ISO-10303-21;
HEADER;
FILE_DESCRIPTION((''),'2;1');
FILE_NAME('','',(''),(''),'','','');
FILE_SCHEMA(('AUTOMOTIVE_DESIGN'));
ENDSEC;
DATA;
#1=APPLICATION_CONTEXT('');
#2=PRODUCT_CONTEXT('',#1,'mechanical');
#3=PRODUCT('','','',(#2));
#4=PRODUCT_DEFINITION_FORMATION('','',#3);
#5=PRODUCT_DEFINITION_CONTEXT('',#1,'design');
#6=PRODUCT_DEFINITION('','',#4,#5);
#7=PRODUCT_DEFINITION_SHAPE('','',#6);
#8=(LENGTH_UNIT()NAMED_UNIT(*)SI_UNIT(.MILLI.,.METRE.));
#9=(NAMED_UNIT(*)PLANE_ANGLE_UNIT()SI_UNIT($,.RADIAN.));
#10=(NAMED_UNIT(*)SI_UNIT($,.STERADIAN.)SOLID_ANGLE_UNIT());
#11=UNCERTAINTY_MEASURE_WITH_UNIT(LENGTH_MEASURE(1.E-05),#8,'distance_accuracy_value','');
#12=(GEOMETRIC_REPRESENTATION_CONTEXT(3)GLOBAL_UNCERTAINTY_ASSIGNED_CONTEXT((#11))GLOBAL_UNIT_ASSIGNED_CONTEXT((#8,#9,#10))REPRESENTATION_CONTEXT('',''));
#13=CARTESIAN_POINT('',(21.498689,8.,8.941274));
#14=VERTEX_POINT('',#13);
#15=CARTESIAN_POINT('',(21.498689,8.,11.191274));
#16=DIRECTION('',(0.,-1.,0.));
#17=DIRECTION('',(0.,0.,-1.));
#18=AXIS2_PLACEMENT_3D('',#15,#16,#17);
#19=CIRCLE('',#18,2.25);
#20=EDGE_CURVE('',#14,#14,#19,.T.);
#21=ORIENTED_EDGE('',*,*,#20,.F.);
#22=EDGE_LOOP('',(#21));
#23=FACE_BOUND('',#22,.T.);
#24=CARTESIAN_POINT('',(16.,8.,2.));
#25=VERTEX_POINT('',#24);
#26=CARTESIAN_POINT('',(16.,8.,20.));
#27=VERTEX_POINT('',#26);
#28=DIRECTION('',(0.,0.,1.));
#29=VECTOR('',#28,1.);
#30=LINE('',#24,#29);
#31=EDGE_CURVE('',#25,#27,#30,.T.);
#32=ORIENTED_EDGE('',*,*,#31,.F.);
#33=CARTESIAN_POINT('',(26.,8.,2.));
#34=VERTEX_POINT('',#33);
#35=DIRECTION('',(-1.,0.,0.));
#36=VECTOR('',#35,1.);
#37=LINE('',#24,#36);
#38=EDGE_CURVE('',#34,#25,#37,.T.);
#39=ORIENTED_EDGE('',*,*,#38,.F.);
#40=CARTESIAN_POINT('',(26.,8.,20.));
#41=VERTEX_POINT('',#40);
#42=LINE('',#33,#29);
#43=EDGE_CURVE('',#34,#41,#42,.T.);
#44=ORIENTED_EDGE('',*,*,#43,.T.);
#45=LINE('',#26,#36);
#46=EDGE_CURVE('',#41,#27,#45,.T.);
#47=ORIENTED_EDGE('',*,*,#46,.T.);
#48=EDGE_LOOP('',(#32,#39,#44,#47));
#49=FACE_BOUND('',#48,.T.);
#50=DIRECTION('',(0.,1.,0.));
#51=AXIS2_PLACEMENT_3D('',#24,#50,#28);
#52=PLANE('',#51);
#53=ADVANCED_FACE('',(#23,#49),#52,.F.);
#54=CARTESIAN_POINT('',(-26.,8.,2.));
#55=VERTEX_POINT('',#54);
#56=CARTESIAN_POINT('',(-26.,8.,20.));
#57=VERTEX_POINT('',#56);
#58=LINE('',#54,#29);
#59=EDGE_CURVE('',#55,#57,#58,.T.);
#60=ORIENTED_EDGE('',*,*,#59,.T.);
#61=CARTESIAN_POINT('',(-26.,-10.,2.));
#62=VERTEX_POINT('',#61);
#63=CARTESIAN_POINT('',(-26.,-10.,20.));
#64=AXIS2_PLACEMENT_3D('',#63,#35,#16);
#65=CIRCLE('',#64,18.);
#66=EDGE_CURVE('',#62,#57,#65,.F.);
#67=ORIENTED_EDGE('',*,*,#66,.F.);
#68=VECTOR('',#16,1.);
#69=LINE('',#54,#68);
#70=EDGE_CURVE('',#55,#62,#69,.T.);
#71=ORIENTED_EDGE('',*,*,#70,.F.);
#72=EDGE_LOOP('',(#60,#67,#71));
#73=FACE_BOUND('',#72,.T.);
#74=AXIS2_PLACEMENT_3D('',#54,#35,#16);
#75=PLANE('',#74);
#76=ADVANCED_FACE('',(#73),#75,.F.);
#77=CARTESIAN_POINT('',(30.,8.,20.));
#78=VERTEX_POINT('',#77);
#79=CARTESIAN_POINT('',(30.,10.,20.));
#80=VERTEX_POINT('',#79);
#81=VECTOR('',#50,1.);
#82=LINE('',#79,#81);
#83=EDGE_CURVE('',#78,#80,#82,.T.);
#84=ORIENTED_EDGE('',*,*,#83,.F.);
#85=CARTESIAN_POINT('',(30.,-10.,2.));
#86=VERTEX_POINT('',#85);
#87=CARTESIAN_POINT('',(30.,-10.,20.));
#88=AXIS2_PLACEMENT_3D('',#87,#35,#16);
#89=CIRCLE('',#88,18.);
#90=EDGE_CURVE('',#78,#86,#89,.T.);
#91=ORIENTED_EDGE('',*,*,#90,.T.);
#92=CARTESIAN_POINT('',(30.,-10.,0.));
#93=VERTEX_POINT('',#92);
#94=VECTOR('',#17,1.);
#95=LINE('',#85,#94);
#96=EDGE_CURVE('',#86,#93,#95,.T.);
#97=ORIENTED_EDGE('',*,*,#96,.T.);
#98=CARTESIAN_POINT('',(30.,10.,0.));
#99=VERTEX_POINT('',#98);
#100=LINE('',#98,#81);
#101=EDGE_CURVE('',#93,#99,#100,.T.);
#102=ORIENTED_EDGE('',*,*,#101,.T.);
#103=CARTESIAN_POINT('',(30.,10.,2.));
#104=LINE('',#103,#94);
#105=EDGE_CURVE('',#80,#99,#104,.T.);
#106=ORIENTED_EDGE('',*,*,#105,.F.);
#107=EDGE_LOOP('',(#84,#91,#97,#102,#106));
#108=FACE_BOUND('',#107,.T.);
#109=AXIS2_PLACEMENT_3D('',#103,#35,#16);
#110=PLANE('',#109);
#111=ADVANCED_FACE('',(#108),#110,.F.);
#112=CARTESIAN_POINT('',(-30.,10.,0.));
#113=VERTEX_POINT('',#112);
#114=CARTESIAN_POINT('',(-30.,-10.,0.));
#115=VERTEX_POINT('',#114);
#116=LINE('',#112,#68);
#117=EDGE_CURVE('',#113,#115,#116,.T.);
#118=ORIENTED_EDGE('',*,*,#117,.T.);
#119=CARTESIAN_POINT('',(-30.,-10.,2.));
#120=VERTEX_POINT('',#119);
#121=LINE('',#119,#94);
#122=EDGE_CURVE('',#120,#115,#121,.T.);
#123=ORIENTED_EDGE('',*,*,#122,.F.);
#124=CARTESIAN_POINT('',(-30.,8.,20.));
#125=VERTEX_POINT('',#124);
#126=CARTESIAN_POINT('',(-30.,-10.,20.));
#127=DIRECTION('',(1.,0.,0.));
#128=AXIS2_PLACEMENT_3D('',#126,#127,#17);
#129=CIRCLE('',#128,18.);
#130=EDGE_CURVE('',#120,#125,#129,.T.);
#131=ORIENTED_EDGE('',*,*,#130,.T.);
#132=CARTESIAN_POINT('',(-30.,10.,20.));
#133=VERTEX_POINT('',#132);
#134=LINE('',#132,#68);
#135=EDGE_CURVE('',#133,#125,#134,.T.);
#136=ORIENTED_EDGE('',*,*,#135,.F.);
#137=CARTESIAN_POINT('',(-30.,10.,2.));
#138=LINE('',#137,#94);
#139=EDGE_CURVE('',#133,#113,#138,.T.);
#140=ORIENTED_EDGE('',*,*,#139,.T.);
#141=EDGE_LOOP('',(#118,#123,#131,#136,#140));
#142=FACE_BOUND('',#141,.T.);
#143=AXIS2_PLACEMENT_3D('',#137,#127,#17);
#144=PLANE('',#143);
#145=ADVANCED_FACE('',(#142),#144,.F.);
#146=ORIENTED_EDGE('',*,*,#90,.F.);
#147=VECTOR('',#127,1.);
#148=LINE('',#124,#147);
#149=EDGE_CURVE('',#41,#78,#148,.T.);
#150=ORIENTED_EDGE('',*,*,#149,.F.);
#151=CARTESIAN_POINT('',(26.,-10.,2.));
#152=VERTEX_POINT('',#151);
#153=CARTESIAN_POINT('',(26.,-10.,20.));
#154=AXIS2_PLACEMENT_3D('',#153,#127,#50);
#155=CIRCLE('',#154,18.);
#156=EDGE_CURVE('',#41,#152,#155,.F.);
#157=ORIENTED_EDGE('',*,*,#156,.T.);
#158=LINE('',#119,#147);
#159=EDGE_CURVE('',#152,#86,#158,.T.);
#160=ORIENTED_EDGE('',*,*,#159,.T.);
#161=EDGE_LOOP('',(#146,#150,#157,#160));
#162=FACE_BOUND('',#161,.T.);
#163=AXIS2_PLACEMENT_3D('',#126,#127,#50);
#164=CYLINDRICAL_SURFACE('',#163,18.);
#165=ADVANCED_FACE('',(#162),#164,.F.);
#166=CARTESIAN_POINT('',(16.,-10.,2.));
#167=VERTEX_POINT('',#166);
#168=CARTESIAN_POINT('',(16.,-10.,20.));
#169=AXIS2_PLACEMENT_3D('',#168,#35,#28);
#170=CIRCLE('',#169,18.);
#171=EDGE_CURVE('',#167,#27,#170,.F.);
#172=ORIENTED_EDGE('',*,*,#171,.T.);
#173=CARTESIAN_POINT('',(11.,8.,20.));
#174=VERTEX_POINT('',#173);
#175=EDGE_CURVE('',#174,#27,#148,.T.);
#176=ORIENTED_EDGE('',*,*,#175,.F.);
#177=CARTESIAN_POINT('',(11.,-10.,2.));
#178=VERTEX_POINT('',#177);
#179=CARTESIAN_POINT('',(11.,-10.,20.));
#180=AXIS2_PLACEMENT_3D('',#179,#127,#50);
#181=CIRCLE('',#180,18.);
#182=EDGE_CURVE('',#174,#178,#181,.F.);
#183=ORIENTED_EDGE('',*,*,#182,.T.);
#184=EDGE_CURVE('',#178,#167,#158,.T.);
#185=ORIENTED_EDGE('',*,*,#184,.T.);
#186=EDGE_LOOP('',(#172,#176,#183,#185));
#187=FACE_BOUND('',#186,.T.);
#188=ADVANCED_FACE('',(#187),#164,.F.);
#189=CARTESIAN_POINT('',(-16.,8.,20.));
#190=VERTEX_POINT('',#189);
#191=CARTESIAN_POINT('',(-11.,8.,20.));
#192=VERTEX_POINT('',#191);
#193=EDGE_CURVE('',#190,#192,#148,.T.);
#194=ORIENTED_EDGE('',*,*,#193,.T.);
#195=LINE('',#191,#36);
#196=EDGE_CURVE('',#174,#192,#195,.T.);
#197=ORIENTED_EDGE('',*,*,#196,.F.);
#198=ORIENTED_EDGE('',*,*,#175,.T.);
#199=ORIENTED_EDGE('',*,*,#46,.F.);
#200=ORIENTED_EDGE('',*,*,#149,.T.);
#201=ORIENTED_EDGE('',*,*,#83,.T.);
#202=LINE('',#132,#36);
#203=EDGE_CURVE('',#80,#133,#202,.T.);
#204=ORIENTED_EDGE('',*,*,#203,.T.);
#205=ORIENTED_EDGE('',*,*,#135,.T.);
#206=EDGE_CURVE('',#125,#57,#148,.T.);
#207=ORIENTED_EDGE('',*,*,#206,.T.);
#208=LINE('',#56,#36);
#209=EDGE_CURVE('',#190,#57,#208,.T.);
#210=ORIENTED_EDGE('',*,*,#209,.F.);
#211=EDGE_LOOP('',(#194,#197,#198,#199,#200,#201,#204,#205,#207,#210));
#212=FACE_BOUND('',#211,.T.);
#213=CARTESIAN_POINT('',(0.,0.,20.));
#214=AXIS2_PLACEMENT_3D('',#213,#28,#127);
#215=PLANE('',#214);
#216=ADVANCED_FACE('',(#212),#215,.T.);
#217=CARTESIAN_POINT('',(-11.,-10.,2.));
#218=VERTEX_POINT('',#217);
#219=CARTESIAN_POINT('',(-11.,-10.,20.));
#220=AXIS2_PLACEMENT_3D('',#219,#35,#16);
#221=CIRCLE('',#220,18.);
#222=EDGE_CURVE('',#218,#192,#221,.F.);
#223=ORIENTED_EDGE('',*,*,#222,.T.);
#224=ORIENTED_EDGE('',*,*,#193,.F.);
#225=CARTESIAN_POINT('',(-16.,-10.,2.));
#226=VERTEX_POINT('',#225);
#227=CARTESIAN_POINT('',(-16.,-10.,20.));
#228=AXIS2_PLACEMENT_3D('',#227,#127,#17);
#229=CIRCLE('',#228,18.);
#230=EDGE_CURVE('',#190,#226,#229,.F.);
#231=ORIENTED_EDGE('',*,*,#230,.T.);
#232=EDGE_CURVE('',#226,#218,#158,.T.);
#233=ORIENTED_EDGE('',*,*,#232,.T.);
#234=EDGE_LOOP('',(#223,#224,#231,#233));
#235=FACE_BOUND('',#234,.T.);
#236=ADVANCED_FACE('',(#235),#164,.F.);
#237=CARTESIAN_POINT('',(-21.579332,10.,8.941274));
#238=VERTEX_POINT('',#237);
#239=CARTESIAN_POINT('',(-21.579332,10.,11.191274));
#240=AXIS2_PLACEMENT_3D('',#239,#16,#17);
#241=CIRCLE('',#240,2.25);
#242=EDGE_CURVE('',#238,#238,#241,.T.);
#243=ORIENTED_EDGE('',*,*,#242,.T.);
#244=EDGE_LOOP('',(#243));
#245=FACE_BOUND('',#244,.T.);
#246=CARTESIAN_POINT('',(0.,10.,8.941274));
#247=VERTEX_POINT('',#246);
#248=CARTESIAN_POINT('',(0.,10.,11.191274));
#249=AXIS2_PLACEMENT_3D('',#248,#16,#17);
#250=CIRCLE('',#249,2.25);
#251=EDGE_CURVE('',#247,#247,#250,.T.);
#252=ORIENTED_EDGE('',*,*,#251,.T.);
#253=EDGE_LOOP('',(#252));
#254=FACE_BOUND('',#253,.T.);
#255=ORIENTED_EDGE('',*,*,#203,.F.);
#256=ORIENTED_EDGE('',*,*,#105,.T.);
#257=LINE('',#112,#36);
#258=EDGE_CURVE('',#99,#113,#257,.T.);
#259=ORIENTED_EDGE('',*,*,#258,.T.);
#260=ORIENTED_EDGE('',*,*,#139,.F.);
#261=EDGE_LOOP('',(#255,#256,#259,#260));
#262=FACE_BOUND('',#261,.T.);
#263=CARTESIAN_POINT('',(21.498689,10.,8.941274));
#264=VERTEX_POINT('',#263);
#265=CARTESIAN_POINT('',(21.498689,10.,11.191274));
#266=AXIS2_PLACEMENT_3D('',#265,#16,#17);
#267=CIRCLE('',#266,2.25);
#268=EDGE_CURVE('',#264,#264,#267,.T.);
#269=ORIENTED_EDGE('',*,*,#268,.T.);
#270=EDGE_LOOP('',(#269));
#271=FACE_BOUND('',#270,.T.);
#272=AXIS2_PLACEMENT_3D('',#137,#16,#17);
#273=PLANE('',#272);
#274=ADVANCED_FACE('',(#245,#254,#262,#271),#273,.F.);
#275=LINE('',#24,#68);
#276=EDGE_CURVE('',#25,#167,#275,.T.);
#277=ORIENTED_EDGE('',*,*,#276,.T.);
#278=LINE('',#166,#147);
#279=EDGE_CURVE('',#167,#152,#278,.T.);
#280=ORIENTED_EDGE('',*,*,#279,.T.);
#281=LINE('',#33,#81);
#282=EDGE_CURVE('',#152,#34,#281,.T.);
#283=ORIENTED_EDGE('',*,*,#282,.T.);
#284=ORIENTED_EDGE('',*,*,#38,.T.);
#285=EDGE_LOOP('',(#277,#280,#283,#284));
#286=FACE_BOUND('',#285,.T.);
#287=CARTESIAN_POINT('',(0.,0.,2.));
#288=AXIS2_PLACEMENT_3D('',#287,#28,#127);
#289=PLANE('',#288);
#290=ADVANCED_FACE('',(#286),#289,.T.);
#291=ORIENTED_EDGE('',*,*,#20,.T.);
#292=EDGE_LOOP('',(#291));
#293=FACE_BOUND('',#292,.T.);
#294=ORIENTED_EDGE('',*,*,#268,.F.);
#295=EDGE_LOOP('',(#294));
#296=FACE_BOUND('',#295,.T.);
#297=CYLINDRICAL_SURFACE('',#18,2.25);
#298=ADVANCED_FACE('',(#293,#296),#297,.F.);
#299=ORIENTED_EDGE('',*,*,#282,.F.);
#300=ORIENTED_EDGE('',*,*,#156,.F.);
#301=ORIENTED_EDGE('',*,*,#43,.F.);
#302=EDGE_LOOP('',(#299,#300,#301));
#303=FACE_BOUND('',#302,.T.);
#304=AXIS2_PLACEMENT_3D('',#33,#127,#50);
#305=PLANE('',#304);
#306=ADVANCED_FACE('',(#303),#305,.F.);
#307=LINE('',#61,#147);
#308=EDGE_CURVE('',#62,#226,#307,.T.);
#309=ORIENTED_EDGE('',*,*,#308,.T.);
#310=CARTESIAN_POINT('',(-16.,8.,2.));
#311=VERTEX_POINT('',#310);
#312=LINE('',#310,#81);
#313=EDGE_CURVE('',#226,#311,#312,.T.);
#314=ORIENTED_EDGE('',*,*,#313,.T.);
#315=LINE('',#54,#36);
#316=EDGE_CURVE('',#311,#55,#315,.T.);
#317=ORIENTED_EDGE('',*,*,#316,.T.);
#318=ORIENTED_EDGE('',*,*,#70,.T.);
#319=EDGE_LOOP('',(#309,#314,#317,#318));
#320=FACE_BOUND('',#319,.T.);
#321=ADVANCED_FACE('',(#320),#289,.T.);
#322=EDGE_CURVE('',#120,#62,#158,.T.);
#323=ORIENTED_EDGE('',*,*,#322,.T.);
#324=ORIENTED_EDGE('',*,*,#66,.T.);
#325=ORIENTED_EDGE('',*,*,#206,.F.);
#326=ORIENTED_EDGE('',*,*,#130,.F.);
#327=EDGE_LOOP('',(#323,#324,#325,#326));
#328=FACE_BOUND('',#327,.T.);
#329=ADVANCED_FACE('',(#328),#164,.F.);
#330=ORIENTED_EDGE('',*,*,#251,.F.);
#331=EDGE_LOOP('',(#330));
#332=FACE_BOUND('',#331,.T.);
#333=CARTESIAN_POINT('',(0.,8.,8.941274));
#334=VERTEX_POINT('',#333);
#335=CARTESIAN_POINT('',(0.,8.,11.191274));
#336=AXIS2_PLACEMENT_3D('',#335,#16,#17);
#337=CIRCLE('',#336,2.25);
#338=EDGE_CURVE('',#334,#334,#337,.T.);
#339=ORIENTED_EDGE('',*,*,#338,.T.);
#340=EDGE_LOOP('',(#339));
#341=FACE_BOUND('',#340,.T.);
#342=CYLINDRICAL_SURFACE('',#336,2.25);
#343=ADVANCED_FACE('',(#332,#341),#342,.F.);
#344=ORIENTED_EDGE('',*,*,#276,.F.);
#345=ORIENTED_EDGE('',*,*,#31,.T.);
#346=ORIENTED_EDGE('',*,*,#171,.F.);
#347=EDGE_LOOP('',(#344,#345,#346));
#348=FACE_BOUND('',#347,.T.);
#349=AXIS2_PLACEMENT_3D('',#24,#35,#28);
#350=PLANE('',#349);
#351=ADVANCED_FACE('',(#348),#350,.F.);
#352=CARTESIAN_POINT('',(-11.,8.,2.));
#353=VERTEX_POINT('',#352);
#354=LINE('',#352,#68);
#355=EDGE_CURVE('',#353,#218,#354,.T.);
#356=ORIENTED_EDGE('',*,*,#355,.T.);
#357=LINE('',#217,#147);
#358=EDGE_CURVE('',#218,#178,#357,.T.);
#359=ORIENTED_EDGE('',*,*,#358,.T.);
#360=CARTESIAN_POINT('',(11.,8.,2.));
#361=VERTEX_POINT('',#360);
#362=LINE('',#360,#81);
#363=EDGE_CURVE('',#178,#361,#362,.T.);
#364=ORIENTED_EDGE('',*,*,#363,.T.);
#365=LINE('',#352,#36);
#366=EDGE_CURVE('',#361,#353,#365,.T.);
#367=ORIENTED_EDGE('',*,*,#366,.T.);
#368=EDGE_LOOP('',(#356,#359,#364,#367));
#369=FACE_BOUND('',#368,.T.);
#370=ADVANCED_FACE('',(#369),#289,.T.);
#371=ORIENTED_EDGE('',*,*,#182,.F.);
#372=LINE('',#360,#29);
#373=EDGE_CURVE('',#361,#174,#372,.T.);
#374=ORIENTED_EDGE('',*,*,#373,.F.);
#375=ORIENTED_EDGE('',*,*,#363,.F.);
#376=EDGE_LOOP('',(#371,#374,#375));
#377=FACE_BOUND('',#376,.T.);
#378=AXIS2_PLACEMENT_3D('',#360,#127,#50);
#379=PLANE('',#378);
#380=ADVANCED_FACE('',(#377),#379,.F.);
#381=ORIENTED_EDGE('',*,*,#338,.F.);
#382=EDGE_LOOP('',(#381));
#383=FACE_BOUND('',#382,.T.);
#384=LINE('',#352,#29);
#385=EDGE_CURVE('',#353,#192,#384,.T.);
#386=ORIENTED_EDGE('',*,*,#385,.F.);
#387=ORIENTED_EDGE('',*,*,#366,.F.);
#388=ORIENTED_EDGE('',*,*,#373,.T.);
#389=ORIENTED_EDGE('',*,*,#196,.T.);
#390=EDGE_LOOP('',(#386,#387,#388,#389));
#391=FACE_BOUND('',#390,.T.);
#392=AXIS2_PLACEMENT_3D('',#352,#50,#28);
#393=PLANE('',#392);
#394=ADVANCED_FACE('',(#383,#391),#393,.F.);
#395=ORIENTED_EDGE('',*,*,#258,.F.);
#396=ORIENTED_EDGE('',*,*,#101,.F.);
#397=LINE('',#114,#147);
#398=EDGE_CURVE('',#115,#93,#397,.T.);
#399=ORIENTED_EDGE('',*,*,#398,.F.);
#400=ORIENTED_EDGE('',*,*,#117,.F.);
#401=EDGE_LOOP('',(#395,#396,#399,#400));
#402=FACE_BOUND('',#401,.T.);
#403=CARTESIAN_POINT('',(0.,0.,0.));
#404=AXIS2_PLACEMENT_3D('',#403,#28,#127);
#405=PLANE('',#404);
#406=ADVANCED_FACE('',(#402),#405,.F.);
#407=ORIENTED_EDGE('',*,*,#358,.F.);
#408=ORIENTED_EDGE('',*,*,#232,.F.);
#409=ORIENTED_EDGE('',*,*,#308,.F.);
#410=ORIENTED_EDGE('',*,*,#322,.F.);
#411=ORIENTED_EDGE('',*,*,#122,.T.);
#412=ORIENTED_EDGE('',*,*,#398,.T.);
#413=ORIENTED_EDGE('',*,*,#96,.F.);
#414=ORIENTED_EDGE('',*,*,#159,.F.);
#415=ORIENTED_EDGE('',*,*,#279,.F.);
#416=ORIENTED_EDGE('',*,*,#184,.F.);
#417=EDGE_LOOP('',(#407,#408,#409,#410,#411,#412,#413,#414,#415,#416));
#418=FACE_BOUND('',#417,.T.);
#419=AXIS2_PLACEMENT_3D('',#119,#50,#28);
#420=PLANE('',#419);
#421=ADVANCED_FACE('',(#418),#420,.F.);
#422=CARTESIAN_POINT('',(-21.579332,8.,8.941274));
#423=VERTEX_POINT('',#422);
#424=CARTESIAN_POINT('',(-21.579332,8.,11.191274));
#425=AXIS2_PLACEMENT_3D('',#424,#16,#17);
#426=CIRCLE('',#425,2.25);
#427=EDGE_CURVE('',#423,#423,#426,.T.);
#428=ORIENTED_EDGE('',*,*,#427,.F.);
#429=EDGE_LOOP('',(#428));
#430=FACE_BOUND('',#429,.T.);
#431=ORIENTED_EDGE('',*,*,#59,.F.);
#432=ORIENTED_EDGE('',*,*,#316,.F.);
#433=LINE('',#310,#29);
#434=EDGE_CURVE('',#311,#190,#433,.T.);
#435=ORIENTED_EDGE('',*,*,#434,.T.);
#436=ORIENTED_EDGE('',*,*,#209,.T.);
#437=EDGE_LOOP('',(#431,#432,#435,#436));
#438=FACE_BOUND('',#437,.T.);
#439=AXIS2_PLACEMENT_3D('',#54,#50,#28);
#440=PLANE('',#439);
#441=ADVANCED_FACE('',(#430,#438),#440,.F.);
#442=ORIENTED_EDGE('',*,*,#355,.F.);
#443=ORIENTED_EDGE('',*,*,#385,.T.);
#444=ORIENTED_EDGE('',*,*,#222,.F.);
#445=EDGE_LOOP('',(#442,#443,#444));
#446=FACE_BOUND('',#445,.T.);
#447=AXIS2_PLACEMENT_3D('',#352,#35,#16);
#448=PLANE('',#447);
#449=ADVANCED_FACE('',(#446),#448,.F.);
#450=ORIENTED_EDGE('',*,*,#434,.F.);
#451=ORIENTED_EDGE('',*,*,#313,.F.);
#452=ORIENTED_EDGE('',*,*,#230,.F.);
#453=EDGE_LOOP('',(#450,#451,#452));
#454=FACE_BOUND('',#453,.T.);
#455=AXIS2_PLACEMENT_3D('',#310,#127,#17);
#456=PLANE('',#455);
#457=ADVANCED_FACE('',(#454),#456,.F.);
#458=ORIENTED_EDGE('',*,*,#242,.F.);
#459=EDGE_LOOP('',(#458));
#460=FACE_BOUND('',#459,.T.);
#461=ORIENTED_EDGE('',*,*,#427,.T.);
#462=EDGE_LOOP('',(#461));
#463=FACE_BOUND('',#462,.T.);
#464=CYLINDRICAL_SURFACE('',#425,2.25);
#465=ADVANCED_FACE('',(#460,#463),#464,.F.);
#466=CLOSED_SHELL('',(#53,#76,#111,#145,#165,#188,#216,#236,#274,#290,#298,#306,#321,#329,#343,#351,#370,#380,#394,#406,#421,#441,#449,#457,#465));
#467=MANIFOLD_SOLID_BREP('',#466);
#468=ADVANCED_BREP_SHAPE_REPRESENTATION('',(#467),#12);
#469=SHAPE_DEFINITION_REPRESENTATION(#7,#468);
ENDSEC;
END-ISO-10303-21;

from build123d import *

# Parameters (mm, degrees)
SKETCH_1_W          = 60
SKETCH_1_H          = 20
EXTRUDE_1_DEPTH     = 2
SKETCH_2_W          = 60
SKETCH_2_H          = 2
EXTRUDE_2_DEPTH     = 18
FILLET_1_R          = 18
SKETCH_4_W          = 10
SKETCH_4_H          = 18
SKETCH_4_W_2        = 22
CUT_EXTRUDE_1_DEPTH = 18
HOLE_WIZARD_M4_1_D  = 4.5


with BuildPart() as part:
    # 스케치1 → 보스-돌출1 (new body)
    with BuildSketch(Plane.XY):
        Rectangle(SKETCH_1_W, SKETCH_1_H)
    extrude(amount=EXTRUDE_1_DEPTH)

    # 스케치2 → 보스-돌출2 (add)
    with BuildSketch(Plane.XY.offset(2)):
        with Locations((0, 9)):
            Rectangle(SKETCH_2_W, SKETCH_2_H)
    extrude(amount=EXTRUDE_2_DEPTH)

    # 필렛1
    fillet_1_edges = [part.edges().sort_by_distance(p)[0] for p in [
        (0, 8, 2),
    ]]
    fillet(fillet_1_edges, radius=FILLET_1_R - 0.0001)  # a hair under: the kernel refuses the full size

    # 스케치4 → 컷-돌출1 (cut)
    with BuildSketch(Plane.XY.offset(20)):
        with Locations((-21, -1)):
            Rectangle(SKETCH_4_W, SKETCH_4_H)
        with Locations((0, -1)):
            Rectangle(SKETCH_4_W_2, SKETCH_4_H)
        with Locations((21, -1)):
            Rectangle(SKETCH_4_W, SKETCH_4_H)
    extrude(amount=-CUT_EXTRUDE_1_DEPTH, mode=Mode.SUBTRACT)

    # M4 여유 구멍1 (through all)
    with Locations(Plane(origin=(0, 8, 0), x_dir=(-1, 0, 0), z_dir=(0, -1, 0))):
        with Locations((-21.498688558, -11.191274161), (21.579331698, -11.191274161), (0, -11.191274161)):
            Hole(HOLE_WIZARD_M4_1_D / 2)


solid = part.part
